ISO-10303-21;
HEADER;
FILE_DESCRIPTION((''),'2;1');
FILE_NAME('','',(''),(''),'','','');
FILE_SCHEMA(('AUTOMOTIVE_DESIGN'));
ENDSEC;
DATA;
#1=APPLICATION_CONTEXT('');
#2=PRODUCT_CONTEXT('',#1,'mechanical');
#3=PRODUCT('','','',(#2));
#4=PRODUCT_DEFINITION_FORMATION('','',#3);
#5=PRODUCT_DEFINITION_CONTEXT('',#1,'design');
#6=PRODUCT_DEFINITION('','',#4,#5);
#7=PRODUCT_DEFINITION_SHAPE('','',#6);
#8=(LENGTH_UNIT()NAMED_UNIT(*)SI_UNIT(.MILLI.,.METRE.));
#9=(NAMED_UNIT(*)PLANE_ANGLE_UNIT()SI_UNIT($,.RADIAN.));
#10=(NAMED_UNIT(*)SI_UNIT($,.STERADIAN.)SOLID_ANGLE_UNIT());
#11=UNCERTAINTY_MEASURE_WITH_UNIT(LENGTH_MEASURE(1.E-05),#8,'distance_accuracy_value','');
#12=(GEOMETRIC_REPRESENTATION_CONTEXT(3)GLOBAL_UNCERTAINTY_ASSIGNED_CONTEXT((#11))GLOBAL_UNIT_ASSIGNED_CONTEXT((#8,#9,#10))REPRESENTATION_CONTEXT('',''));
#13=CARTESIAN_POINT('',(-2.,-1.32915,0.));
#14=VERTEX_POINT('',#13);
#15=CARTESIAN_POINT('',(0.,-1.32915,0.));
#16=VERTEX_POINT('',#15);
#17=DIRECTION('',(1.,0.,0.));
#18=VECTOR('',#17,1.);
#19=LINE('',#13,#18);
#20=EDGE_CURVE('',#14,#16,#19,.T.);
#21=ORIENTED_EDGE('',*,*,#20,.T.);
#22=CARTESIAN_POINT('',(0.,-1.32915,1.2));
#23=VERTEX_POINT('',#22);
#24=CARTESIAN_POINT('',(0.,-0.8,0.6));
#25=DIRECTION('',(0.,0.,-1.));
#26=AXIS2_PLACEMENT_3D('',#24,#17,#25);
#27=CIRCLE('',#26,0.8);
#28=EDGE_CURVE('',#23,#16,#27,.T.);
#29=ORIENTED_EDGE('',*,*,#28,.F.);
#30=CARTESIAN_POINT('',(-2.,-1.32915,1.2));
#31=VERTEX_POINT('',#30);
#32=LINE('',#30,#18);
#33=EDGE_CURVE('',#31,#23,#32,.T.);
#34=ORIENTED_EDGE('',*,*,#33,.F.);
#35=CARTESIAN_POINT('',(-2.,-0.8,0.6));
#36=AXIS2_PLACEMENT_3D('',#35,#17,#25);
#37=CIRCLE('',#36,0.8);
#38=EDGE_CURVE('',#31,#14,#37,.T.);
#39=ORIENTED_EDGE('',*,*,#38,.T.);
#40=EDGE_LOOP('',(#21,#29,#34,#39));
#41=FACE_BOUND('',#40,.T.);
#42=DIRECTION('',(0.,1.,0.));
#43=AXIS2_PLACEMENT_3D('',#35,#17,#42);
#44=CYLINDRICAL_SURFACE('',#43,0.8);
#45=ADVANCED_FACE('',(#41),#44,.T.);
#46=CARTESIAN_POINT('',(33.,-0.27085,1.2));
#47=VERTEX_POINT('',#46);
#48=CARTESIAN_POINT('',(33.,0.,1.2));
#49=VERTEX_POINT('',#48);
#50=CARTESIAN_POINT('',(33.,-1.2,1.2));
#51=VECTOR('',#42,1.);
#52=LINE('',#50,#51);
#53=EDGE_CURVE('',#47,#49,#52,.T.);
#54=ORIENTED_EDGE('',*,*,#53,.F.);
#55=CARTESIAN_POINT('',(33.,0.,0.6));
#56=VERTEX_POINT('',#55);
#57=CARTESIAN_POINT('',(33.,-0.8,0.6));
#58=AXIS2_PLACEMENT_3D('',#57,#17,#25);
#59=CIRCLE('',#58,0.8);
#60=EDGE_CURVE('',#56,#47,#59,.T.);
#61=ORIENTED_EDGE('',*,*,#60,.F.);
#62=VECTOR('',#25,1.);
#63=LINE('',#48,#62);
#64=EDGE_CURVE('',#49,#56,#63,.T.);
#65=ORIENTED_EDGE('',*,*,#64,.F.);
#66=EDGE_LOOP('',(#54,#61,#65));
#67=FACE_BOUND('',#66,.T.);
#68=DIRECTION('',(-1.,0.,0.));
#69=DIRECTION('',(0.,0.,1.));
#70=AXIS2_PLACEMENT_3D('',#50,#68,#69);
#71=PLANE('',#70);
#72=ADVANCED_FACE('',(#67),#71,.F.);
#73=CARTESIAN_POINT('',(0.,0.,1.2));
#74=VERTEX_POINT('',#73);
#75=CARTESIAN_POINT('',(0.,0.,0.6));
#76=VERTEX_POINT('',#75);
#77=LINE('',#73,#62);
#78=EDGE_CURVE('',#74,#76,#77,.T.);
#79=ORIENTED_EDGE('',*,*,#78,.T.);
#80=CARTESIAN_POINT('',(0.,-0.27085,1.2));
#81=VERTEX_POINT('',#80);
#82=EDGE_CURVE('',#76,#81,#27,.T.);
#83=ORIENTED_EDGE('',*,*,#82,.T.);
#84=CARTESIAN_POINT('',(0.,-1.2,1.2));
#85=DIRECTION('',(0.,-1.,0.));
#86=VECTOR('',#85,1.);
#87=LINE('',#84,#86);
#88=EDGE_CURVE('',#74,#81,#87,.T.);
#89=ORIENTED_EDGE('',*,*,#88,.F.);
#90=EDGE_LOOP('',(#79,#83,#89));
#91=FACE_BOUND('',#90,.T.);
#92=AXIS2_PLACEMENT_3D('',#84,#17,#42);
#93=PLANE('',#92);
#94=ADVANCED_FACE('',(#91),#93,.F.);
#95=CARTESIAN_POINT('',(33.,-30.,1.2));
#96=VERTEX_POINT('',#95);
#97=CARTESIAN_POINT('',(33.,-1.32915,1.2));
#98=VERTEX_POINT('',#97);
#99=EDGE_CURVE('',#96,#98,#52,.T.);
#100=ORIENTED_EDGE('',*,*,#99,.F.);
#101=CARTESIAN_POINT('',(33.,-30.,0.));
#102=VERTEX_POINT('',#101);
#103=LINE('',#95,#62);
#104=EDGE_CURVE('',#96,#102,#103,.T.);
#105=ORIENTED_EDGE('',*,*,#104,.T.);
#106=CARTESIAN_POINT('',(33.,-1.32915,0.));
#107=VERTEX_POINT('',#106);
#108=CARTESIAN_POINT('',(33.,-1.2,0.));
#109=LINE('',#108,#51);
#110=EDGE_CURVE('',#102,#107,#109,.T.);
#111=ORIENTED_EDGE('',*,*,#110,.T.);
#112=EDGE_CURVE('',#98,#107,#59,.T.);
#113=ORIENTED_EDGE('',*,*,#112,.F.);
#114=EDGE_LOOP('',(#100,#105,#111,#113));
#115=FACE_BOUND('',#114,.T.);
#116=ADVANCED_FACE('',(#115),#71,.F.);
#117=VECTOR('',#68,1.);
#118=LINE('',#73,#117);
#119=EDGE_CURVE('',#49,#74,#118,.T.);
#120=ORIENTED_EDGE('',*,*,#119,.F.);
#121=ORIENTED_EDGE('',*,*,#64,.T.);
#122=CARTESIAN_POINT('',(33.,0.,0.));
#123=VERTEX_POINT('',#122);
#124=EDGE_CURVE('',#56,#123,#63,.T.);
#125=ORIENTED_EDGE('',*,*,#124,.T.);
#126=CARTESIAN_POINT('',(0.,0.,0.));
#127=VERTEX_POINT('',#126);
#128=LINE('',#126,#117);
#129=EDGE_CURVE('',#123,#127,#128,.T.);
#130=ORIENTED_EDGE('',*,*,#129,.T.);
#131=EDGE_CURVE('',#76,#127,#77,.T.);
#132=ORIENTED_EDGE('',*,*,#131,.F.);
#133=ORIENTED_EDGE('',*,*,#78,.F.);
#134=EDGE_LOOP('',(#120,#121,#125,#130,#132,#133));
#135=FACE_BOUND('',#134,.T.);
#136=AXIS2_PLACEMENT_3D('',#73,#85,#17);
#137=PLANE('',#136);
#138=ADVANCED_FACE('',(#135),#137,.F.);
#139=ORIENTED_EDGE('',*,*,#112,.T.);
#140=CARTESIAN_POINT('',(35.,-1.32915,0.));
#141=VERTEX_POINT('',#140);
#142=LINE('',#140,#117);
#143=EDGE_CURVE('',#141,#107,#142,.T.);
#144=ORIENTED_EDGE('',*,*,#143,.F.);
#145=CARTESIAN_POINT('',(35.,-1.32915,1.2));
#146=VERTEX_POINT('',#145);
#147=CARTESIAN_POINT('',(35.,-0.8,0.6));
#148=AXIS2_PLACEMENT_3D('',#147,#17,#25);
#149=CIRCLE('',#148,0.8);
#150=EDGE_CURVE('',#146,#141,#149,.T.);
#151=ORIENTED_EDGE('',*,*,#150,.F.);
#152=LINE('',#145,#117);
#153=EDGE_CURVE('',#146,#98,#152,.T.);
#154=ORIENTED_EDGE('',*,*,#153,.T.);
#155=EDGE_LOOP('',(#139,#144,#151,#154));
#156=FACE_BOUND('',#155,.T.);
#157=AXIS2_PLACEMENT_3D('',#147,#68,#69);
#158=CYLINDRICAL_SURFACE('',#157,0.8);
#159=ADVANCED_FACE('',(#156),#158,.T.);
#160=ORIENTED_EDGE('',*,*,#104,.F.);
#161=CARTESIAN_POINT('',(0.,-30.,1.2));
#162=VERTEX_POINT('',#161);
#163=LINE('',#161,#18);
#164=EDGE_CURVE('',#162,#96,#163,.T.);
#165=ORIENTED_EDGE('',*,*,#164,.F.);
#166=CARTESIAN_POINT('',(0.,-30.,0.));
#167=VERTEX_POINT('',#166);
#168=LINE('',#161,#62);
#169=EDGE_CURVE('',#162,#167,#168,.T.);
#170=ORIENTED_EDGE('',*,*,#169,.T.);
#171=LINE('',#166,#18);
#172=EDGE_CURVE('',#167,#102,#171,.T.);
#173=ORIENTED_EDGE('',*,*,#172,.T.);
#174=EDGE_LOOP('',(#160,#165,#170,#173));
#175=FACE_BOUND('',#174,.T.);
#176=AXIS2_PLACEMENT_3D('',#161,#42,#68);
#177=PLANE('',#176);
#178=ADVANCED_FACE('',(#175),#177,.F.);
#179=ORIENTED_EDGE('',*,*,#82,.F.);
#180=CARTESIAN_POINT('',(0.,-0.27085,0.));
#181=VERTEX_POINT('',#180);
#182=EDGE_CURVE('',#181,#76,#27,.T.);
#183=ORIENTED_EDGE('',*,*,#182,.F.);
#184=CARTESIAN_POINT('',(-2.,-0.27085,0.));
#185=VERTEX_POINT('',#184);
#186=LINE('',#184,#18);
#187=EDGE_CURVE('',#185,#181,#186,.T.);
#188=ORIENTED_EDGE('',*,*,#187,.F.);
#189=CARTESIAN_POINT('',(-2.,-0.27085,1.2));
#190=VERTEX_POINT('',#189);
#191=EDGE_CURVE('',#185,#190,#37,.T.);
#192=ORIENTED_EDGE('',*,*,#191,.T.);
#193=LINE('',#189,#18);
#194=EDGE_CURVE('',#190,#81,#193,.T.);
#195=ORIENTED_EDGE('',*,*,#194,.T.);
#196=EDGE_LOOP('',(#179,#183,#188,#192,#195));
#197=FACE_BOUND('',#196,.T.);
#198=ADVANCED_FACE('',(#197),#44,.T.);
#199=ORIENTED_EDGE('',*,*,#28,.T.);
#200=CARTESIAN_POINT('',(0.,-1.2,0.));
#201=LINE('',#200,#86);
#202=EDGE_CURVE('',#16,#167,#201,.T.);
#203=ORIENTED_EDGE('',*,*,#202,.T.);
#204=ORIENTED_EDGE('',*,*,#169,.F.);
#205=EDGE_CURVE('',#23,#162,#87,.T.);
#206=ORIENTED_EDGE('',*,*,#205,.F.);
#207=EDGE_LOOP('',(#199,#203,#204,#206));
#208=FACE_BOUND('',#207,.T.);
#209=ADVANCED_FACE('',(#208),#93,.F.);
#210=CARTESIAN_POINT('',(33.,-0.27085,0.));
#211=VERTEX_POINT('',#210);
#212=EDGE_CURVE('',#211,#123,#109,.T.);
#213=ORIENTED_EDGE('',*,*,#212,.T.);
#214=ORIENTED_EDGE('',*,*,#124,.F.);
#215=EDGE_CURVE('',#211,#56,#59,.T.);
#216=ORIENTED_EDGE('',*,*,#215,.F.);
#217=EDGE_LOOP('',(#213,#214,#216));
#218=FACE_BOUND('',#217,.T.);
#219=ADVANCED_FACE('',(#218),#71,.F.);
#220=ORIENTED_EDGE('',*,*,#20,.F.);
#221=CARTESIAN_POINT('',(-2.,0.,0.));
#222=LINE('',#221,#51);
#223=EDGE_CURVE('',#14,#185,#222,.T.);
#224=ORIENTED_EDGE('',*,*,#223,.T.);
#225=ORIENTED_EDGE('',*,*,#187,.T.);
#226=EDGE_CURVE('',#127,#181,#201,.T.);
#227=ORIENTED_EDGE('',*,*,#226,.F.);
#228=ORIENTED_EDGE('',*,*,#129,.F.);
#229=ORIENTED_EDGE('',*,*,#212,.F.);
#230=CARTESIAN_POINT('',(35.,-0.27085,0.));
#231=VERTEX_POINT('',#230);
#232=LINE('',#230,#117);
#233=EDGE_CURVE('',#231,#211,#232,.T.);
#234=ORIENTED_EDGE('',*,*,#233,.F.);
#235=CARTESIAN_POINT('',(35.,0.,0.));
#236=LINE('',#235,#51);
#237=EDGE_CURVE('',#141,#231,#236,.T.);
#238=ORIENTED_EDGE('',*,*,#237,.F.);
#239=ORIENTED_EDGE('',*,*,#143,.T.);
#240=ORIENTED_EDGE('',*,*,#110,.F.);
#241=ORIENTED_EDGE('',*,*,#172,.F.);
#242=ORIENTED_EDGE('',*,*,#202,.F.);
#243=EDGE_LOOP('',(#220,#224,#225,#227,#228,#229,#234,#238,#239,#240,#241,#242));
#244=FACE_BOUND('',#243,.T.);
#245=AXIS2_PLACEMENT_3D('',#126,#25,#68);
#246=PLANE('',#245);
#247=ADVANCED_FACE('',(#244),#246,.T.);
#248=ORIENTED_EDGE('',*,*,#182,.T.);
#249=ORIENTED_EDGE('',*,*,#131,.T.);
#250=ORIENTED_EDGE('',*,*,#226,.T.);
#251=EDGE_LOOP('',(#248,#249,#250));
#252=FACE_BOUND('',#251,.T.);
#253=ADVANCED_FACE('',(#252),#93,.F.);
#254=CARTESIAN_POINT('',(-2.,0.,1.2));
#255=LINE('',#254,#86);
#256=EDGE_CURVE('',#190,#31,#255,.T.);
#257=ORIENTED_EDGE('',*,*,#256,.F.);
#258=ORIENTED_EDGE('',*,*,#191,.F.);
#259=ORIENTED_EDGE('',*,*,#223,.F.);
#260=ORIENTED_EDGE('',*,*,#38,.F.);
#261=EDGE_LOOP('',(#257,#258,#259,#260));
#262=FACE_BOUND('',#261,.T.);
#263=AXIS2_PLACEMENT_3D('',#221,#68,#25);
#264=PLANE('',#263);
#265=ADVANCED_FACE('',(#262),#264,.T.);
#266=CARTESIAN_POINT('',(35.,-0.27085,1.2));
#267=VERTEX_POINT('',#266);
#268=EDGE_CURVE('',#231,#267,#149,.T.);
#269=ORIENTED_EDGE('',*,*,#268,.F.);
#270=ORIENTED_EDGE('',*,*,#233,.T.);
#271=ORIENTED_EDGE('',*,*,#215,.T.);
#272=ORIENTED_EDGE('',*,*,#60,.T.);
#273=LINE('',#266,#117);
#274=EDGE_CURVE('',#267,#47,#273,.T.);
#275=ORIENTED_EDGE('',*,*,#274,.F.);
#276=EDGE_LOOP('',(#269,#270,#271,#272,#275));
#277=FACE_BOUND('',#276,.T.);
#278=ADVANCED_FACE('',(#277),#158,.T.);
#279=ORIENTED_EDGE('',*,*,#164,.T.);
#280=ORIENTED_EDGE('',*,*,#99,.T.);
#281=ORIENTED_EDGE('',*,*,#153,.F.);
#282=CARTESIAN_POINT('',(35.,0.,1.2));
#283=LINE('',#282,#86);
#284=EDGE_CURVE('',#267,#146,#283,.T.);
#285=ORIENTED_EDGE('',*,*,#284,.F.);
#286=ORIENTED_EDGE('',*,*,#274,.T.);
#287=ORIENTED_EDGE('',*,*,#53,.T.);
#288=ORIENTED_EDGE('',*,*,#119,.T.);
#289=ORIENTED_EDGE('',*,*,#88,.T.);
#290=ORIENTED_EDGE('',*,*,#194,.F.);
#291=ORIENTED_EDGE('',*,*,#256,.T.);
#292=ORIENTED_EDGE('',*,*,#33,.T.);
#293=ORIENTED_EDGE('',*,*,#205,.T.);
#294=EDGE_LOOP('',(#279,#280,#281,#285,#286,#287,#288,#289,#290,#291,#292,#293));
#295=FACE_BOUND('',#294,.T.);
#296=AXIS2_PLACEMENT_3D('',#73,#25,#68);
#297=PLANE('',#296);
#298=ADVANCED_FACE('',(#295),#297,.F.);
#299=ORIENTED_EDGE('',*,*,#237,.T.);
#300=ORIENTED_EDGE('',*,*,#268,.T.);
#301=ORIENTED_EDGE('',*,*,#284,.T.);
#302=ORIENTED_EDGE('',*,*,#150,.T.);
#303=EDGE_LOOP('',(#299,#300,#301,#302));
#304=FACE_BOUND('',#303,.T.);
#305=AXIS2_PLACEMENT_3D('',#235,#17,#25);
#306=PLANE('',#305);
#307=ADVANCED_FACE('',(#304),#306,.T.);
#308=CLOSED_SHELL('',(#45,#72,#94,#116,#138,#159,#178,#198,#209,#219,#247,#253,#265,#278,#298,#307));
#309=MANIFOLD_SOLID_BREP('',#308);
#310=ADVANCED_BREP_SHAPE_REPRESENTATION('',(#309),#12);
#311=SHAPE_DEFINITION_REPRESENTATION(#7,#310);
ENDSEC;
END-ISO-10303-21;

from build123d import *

# Parameters (mm, degrees)
BOSS_EXTRUDE1_DEPTH = 1.2
BOSS_EXTRUDE3_DEPTH = 2


# Read off the part's stored shape, not the designer's step: Boss-Extrude3
with BuildPart() as part:
    # Sketch1 → Boss-Extrude1 (new body)
    with BuildSketch(Plane.XY):
        Polygon((0, 0), (33, 0), (33, -1.2), (33, -30), (0, -30), (0, -1.2), align=None)
    extrude(amount=BOSS_EXTRUDE1_DEPTH)

    # Boss-Extrude3 outline → Boss-Extrude3 (add)
    with BuildSketch(Plane(origin=(33, 0, 0), x_dir=(0, 0, -1), z_dir=(1, 0, 0))):
        with BuildLine():
            ThreePointArc((0, -0.270849738), (-0.6, 0), (-1.2, -0.270849738))
            Line((-1.2, -0.270849738), (-1.2, -1.329150262))
            ThreePointArc((-1.2, -1.329150262), (-0.6, -1.6), (0, -1.329150262))
            Line((0, -1.329150262), (0, -0.270849738))
        make_face()
    boss_extrude3 = extrude(amount=BOSS_EXTRUDE3_DEPTH)

    # Mirror1: Boss-Extrude3 across plane
    add(boss_extrude3.mirror(Plane.ZY.offset(-16.5)))


solid = part.part
